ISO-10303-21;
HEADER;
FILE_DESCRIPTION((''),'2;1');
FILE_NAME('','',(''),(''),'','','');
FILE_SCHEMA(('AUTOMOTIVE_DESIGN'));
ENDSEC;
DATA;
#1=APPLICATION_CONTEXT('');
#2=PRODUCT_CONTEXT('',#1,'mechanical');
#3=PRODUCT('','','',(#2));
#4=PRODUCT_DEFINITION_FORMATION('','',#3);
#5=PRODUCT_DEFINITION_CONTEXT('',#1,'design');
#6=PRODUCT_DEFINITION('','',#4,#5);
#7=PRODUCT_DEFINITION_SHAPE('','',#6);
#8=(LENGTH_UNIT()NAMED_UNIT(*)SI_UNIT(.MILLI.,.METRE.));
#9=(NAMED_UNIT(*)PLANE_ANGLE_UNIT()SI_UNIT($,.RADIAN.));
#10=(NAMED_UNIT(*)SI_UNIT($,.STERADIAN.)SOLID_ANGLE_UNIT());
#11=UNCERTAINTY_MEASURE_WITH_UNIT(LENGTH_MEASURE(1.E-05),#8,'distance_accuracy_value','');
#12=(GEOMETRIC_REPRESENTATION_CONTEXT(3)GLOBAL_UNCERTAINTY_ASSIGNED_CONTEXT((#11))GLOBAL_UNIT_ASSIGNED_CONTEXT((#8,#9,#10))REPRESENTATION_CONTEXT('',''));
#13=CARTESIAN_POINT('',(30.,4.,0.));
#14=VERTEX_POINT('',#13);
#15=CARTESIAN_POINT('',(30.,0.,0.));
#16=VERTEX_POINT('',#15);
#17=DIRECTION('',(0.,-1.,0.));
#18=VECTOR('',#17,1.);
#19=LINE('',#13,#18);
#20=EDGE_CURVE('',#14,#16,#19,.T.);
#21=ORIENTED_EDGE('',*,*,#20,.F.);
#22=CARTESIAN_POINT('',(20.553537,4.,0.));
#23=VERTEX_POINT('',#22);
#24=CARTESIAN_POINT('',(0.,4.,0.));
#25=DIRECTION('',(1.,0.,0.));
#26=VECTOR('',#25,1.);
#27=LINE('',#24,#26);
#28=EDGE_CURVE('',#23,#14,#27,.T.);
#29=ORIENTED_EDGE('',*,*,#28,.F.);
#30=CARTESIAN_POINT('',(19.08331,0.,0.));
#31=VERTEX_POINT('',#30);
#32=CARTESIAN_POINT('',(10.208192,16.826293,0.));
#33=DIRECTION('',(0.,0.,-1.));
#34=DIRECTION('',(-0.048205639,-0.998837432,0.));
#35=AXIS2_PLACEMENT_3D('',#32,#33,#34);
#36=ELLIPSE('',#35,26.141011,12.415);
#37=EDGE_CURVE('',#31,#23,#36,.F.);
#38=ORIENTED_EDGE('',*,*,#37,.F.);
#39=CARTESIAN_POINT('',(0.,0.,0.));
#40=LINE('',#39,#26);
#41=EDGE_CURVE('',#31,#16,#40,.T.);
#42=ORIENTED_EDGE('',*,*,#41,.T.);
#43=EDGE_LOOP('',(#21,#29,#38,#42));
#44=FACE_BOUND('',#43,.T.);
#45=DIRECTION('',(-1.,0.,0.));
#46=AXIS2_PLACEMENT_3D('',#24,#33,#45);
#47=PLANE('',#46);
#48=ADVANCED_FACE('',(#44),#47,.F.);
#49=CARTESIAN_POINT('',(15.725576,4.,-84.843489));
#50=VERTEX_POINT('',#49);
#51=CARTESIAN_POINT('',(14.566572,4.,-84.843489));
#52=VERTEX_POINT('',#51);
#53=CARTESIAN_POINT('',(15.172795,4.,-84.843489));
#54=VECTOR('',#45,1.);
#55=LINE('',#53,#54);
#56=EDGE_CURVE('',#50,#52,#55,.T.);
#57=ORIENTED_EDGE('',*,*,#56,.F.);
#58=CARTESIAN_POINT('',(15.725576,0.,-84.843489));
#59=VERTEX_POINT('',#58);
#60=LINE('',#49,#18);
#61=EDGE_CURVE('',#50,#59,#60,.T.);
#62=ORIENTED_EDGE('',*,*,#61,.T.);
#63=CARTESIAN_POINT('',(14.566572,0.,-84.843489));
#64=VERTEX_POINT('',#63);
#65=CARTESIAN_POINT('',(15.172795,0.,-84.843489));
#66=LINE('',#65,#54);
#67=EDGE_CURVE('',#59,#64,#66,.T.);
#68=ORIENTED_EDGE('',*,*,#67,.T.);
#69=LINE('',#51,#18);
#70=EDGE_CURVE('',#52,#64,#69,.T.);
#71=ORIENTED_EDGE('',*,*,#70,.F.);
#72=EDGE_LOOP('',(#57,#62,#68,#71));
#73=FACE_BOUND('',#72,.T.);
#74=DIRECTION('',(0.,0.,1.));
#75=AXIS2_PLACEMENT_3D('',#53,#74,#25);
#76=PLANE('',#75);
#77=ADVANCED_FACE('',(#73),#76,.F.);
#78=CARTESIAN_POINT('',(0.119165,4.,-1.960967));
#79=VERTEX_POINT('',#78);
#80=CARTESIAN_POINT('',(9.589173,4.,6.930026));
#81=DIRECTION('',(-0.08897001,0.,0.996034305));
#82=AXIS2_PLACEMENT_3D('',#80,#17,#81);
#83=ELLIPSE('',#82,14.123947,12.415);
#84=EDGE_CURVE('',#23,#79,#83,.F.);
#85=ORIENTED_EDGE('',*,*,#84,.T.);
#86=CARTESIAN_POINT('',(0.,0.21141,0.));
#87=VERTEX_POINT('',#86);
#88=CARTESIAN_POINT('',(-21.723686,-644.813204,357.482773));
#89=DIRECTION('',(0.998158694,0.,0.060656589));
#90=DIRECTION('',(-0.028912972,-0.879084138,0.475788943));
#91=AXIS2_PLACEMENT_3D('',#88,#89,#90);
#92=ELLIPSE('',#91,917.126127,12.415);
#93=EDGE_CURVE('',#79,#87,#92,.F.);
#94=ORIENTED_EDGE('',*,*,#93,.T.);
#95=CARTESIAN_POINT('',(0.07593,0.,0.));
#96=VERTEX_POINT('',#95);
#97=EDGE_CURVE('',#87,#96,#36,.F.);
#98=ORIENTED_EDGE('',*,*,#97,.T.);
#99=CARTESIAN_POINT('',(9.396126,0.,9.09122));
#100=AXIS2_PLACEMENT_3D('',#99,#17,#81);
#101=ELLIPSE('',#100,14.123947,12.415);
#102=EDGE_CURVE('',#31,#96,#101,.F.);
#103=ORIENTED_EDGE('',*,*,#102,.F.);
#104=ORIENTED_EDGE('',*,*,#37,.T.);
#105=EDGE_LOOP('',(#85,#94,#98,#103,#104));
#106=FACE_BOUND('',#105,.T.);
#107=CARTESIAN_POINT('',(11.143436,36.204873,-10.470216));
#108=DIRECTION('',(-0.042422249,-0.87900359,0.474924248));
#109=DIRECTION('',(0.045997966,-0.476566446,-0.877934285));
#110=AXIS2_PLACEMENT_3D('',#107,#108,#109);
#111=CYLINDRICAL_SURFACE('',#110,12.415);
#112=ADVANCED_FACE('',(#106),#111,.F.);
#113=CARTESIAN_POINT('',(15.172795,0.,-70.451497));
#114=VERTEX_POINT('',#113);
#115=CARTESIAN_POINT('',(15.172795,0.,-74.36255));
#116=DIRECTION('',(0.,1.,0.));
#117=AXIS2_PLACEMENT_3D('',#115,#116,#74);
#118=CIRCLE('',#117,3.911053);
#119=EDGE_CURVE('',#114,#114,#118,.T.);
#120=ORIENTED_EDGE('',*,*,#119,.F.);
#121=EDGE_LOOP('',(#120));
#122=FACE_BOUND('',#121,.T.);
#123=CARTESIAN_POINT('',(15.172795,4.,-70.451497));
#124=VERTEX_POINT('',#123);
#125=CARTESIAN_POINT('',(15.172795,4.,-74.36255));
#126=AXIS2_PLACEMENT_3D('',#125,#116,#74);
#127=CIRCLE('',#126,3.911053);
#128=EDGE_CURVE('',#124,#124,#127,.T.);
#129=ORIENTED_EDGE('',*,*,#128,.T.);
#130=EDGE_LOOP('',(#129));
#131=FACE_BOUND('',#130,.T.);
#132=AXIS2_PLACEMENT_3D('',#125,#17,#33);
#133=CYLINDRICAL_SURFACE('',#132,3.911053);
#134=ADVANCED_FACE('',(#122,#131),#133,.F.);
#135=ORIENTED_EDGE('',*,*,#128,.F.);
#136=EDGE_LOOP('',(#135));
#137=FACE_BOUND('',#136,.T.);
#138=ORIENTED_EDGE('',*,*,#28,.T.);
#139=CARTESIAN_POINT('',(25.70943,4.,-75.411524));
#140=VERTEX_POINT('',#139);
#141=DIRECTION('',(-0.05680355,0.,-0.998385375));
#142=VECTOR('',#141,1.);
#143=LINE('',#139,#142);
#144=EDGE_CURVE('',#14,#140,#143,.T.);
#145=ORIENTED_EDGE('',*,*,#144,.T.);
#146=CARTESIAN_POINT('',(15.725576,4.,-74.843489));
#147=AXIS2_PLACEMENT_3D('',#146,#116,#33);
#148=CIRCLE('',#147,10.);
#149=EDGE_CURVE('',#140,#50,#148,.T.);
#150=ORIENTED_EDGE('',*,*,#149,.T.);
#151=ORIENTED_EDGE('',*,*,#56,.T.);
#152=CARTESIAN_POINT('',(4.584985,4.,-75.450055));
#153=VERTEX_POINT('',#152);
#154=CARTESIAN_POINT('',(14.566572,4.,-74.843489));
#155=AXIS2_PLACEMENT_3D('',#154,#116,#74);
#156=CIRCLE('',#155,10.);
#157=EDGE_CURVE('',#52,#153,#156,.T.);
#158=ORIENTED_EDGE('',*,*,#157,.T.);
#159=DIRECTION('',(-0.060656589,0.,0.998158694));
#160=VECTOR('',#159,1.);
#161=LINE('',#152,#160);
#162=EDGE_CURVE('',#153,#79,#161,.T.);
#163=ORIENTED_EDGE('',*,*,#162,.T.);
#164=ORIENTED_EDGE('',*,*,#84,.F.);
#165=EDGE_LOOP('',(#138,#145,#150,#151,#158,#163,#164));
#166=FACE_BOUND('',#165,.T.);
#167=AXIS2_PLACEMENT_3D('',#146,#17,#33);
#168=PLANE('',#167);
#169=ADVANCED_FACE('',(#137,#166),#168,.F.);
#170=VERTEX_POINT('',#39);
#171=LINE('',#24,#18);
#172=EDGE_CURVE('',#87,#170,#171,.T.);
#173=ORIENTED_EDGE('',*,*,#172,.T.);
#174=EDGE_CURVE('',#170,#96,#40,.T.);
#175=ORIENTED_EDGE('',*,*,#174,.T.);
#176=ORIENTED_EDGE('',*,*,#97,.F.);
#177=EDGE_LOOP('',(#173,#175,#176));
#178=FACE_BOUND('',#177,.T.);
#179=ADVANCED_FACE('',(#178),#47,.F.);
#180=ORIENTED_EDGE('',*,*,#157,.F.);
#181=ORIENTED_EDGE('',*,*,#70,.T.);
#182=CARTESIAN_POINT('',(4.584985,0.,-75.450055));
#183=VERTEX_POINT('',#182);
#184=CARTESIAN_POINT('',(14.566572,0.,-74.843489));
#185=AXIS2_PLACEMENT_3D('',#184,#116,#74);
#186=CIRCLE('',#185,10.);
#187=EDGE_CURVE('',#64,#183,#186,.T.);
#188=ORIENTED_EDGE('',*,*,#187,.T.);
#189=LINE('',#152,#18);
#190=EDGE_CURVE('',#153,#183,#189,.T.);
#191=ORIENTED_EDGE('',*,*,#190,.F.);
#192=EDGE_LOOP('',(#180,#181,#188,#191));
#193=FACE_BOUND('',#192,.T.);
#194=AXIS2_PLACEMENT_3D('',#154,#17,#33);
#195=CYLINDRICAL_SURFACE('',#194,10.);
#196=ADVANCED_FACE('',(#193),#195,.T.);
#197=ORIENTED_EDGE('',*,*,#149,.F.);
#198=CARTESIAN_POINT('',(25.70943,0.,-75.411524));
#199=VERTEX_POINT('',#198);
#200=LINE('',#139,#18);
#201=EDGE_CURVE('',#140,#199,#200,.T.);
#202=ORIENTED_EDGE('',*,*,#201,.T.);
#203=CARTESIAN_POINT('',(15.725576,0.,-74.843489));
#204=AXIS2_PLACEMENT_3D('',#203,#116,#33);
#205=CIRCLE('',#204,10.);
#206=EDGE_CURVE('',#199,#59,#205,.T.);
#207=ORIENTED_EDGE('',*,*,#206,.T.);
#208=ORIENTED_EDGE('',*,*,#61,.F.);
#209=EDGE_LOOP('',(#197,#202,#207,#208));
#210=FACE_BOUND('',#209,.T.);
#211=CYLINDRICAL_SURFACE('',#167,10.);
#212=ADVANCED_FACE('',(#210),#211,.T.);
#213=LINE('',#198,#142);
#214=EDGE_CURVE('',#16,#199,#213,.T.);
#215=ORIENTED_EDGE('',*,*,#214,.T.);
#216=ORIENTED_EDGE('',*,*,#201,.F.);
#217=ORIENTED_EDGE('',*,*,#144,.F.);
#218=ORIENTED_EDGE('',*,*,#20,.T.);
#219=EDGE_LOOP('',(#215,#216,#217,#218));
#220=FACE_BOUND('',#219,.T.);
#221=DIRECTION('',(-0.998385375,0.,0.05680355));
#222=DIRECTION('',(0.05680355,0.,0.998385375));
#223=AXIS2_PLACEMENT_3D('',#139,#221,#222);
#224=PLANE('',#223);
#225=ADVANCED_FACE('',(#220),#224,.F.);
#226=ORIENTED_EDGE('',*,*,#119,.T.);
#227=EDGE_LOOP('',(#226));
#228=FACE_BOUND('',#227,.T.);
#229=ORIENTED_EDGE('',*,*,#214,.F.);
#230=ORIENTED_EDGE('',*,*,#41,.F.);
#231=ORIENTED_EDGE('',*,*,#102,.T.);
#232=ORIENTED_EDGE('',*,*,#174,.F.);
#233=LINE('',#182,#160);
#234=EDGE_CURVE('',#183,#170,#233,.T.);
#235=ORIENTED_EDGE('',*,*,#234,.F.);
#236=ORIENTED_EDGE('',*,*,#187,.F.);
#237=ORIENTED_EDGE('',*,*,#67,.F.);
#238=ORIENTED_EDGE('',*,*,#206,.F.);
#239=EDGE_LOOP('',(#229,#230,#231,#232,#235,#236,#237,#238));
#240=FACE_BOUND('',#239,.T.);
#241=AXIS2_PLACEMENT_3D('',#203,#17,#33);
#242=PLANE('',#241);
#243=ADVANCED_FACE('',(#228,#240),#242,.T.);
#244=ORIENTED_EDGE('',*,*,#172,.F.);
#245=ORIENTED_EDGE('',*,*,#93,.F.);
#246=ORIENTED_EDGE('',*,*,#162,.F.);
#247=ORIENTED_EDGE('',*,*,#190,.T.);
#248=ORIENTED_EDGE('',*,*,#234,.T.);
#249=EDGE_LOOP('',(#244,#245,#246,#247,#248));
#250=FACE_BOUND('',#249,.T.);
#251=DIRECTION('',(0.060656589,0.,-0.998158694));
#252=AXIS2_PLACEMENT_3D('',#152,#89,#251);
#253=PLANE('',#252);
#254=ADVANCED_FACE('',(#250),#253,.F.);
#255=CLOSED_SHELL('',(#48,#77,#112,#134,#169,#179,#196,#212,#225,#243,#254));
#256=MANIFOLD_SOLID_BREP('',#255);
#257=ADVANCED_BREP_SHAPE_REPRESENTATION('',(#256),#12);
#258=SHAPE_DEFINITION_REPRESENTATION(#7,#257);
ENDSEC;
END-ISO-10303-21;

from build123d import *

# Parameters (mm, degrees)
SKETCH1_R           = 3.911052803
BOSS_EXTRUDE1_DEPTH = 4
CAVITY1_START       = 0.003221124
CAVITY1_DEPTH       = 7.362862002


# Read off the part's stored shape, not the designer's step: Cavity1
with BuildPart() as part:
    # Sketch1 → Boss-Extrude1 (new body)
    with BuildSketch(Plane(origin=(0, 0, 0), x_dir=(1, 0, 0), z_dir=(0, 1, 0))):
        with BuildLine():
            Line((0, 0), (30, 0))
            Line((30, 0), (25.709430043, 75.411524479))
            ThreePointArc((25.709430043, 75.411524479), (22.592877256, 82.112613927), (15.725576294, 84.84348898))
            Line((15.725576294, 84.84348898), (15.172794511, 84.84348898))
            Line((15.172794511, 84.84348898), (14.566572295, 84.84348898))
            ThreePointArc((14.566572295, 84.84348898), (7.713312448, 82.125853257), (4.584985356, 75.450054873))
            Line((4.584985356, 75.450054873), (0, 0))
        make_face()
        with Locations(Location((15.172794511, 74.362549593, 0), (0, 0, 270))):
            Circle(SKETCH1_R, mode=Mode.SUBTRACT)
    extrude(amount=BOSS_EXTRUDE1_DEPTH)

    # Cavity1 outline → Cavity1 (cut)
    with BuildSketch(Plane(origin=(0, 0, 0), x_dir=(0.9990997712006259, -0.037322908087554375, 0.02016550814496959), z_dir=(0.042422248724659405, 0.8790035901407052, -0.4749242479942401)).offset(CAVITY1_START)):
        with BuildLine():
            ThreePointArc((20.385742614, -1.901408695), (10.614392107, 4.37266206), (-0.069777809, -0.176158423))
            Line((-0.069777809, -0.176158423), (-2, -2.55511847))
            Line((-2, -2.55511847), (-2, -3))
            Line((-2, -3), (21.005093085, -3))
            Line((21.005093085, -3), (20.385742614, -1.901408695))
        make_face()
    extrude(amount=CAVITY1_DEPTH, mode=Mode.SUBTRACT)


solid = part.part
